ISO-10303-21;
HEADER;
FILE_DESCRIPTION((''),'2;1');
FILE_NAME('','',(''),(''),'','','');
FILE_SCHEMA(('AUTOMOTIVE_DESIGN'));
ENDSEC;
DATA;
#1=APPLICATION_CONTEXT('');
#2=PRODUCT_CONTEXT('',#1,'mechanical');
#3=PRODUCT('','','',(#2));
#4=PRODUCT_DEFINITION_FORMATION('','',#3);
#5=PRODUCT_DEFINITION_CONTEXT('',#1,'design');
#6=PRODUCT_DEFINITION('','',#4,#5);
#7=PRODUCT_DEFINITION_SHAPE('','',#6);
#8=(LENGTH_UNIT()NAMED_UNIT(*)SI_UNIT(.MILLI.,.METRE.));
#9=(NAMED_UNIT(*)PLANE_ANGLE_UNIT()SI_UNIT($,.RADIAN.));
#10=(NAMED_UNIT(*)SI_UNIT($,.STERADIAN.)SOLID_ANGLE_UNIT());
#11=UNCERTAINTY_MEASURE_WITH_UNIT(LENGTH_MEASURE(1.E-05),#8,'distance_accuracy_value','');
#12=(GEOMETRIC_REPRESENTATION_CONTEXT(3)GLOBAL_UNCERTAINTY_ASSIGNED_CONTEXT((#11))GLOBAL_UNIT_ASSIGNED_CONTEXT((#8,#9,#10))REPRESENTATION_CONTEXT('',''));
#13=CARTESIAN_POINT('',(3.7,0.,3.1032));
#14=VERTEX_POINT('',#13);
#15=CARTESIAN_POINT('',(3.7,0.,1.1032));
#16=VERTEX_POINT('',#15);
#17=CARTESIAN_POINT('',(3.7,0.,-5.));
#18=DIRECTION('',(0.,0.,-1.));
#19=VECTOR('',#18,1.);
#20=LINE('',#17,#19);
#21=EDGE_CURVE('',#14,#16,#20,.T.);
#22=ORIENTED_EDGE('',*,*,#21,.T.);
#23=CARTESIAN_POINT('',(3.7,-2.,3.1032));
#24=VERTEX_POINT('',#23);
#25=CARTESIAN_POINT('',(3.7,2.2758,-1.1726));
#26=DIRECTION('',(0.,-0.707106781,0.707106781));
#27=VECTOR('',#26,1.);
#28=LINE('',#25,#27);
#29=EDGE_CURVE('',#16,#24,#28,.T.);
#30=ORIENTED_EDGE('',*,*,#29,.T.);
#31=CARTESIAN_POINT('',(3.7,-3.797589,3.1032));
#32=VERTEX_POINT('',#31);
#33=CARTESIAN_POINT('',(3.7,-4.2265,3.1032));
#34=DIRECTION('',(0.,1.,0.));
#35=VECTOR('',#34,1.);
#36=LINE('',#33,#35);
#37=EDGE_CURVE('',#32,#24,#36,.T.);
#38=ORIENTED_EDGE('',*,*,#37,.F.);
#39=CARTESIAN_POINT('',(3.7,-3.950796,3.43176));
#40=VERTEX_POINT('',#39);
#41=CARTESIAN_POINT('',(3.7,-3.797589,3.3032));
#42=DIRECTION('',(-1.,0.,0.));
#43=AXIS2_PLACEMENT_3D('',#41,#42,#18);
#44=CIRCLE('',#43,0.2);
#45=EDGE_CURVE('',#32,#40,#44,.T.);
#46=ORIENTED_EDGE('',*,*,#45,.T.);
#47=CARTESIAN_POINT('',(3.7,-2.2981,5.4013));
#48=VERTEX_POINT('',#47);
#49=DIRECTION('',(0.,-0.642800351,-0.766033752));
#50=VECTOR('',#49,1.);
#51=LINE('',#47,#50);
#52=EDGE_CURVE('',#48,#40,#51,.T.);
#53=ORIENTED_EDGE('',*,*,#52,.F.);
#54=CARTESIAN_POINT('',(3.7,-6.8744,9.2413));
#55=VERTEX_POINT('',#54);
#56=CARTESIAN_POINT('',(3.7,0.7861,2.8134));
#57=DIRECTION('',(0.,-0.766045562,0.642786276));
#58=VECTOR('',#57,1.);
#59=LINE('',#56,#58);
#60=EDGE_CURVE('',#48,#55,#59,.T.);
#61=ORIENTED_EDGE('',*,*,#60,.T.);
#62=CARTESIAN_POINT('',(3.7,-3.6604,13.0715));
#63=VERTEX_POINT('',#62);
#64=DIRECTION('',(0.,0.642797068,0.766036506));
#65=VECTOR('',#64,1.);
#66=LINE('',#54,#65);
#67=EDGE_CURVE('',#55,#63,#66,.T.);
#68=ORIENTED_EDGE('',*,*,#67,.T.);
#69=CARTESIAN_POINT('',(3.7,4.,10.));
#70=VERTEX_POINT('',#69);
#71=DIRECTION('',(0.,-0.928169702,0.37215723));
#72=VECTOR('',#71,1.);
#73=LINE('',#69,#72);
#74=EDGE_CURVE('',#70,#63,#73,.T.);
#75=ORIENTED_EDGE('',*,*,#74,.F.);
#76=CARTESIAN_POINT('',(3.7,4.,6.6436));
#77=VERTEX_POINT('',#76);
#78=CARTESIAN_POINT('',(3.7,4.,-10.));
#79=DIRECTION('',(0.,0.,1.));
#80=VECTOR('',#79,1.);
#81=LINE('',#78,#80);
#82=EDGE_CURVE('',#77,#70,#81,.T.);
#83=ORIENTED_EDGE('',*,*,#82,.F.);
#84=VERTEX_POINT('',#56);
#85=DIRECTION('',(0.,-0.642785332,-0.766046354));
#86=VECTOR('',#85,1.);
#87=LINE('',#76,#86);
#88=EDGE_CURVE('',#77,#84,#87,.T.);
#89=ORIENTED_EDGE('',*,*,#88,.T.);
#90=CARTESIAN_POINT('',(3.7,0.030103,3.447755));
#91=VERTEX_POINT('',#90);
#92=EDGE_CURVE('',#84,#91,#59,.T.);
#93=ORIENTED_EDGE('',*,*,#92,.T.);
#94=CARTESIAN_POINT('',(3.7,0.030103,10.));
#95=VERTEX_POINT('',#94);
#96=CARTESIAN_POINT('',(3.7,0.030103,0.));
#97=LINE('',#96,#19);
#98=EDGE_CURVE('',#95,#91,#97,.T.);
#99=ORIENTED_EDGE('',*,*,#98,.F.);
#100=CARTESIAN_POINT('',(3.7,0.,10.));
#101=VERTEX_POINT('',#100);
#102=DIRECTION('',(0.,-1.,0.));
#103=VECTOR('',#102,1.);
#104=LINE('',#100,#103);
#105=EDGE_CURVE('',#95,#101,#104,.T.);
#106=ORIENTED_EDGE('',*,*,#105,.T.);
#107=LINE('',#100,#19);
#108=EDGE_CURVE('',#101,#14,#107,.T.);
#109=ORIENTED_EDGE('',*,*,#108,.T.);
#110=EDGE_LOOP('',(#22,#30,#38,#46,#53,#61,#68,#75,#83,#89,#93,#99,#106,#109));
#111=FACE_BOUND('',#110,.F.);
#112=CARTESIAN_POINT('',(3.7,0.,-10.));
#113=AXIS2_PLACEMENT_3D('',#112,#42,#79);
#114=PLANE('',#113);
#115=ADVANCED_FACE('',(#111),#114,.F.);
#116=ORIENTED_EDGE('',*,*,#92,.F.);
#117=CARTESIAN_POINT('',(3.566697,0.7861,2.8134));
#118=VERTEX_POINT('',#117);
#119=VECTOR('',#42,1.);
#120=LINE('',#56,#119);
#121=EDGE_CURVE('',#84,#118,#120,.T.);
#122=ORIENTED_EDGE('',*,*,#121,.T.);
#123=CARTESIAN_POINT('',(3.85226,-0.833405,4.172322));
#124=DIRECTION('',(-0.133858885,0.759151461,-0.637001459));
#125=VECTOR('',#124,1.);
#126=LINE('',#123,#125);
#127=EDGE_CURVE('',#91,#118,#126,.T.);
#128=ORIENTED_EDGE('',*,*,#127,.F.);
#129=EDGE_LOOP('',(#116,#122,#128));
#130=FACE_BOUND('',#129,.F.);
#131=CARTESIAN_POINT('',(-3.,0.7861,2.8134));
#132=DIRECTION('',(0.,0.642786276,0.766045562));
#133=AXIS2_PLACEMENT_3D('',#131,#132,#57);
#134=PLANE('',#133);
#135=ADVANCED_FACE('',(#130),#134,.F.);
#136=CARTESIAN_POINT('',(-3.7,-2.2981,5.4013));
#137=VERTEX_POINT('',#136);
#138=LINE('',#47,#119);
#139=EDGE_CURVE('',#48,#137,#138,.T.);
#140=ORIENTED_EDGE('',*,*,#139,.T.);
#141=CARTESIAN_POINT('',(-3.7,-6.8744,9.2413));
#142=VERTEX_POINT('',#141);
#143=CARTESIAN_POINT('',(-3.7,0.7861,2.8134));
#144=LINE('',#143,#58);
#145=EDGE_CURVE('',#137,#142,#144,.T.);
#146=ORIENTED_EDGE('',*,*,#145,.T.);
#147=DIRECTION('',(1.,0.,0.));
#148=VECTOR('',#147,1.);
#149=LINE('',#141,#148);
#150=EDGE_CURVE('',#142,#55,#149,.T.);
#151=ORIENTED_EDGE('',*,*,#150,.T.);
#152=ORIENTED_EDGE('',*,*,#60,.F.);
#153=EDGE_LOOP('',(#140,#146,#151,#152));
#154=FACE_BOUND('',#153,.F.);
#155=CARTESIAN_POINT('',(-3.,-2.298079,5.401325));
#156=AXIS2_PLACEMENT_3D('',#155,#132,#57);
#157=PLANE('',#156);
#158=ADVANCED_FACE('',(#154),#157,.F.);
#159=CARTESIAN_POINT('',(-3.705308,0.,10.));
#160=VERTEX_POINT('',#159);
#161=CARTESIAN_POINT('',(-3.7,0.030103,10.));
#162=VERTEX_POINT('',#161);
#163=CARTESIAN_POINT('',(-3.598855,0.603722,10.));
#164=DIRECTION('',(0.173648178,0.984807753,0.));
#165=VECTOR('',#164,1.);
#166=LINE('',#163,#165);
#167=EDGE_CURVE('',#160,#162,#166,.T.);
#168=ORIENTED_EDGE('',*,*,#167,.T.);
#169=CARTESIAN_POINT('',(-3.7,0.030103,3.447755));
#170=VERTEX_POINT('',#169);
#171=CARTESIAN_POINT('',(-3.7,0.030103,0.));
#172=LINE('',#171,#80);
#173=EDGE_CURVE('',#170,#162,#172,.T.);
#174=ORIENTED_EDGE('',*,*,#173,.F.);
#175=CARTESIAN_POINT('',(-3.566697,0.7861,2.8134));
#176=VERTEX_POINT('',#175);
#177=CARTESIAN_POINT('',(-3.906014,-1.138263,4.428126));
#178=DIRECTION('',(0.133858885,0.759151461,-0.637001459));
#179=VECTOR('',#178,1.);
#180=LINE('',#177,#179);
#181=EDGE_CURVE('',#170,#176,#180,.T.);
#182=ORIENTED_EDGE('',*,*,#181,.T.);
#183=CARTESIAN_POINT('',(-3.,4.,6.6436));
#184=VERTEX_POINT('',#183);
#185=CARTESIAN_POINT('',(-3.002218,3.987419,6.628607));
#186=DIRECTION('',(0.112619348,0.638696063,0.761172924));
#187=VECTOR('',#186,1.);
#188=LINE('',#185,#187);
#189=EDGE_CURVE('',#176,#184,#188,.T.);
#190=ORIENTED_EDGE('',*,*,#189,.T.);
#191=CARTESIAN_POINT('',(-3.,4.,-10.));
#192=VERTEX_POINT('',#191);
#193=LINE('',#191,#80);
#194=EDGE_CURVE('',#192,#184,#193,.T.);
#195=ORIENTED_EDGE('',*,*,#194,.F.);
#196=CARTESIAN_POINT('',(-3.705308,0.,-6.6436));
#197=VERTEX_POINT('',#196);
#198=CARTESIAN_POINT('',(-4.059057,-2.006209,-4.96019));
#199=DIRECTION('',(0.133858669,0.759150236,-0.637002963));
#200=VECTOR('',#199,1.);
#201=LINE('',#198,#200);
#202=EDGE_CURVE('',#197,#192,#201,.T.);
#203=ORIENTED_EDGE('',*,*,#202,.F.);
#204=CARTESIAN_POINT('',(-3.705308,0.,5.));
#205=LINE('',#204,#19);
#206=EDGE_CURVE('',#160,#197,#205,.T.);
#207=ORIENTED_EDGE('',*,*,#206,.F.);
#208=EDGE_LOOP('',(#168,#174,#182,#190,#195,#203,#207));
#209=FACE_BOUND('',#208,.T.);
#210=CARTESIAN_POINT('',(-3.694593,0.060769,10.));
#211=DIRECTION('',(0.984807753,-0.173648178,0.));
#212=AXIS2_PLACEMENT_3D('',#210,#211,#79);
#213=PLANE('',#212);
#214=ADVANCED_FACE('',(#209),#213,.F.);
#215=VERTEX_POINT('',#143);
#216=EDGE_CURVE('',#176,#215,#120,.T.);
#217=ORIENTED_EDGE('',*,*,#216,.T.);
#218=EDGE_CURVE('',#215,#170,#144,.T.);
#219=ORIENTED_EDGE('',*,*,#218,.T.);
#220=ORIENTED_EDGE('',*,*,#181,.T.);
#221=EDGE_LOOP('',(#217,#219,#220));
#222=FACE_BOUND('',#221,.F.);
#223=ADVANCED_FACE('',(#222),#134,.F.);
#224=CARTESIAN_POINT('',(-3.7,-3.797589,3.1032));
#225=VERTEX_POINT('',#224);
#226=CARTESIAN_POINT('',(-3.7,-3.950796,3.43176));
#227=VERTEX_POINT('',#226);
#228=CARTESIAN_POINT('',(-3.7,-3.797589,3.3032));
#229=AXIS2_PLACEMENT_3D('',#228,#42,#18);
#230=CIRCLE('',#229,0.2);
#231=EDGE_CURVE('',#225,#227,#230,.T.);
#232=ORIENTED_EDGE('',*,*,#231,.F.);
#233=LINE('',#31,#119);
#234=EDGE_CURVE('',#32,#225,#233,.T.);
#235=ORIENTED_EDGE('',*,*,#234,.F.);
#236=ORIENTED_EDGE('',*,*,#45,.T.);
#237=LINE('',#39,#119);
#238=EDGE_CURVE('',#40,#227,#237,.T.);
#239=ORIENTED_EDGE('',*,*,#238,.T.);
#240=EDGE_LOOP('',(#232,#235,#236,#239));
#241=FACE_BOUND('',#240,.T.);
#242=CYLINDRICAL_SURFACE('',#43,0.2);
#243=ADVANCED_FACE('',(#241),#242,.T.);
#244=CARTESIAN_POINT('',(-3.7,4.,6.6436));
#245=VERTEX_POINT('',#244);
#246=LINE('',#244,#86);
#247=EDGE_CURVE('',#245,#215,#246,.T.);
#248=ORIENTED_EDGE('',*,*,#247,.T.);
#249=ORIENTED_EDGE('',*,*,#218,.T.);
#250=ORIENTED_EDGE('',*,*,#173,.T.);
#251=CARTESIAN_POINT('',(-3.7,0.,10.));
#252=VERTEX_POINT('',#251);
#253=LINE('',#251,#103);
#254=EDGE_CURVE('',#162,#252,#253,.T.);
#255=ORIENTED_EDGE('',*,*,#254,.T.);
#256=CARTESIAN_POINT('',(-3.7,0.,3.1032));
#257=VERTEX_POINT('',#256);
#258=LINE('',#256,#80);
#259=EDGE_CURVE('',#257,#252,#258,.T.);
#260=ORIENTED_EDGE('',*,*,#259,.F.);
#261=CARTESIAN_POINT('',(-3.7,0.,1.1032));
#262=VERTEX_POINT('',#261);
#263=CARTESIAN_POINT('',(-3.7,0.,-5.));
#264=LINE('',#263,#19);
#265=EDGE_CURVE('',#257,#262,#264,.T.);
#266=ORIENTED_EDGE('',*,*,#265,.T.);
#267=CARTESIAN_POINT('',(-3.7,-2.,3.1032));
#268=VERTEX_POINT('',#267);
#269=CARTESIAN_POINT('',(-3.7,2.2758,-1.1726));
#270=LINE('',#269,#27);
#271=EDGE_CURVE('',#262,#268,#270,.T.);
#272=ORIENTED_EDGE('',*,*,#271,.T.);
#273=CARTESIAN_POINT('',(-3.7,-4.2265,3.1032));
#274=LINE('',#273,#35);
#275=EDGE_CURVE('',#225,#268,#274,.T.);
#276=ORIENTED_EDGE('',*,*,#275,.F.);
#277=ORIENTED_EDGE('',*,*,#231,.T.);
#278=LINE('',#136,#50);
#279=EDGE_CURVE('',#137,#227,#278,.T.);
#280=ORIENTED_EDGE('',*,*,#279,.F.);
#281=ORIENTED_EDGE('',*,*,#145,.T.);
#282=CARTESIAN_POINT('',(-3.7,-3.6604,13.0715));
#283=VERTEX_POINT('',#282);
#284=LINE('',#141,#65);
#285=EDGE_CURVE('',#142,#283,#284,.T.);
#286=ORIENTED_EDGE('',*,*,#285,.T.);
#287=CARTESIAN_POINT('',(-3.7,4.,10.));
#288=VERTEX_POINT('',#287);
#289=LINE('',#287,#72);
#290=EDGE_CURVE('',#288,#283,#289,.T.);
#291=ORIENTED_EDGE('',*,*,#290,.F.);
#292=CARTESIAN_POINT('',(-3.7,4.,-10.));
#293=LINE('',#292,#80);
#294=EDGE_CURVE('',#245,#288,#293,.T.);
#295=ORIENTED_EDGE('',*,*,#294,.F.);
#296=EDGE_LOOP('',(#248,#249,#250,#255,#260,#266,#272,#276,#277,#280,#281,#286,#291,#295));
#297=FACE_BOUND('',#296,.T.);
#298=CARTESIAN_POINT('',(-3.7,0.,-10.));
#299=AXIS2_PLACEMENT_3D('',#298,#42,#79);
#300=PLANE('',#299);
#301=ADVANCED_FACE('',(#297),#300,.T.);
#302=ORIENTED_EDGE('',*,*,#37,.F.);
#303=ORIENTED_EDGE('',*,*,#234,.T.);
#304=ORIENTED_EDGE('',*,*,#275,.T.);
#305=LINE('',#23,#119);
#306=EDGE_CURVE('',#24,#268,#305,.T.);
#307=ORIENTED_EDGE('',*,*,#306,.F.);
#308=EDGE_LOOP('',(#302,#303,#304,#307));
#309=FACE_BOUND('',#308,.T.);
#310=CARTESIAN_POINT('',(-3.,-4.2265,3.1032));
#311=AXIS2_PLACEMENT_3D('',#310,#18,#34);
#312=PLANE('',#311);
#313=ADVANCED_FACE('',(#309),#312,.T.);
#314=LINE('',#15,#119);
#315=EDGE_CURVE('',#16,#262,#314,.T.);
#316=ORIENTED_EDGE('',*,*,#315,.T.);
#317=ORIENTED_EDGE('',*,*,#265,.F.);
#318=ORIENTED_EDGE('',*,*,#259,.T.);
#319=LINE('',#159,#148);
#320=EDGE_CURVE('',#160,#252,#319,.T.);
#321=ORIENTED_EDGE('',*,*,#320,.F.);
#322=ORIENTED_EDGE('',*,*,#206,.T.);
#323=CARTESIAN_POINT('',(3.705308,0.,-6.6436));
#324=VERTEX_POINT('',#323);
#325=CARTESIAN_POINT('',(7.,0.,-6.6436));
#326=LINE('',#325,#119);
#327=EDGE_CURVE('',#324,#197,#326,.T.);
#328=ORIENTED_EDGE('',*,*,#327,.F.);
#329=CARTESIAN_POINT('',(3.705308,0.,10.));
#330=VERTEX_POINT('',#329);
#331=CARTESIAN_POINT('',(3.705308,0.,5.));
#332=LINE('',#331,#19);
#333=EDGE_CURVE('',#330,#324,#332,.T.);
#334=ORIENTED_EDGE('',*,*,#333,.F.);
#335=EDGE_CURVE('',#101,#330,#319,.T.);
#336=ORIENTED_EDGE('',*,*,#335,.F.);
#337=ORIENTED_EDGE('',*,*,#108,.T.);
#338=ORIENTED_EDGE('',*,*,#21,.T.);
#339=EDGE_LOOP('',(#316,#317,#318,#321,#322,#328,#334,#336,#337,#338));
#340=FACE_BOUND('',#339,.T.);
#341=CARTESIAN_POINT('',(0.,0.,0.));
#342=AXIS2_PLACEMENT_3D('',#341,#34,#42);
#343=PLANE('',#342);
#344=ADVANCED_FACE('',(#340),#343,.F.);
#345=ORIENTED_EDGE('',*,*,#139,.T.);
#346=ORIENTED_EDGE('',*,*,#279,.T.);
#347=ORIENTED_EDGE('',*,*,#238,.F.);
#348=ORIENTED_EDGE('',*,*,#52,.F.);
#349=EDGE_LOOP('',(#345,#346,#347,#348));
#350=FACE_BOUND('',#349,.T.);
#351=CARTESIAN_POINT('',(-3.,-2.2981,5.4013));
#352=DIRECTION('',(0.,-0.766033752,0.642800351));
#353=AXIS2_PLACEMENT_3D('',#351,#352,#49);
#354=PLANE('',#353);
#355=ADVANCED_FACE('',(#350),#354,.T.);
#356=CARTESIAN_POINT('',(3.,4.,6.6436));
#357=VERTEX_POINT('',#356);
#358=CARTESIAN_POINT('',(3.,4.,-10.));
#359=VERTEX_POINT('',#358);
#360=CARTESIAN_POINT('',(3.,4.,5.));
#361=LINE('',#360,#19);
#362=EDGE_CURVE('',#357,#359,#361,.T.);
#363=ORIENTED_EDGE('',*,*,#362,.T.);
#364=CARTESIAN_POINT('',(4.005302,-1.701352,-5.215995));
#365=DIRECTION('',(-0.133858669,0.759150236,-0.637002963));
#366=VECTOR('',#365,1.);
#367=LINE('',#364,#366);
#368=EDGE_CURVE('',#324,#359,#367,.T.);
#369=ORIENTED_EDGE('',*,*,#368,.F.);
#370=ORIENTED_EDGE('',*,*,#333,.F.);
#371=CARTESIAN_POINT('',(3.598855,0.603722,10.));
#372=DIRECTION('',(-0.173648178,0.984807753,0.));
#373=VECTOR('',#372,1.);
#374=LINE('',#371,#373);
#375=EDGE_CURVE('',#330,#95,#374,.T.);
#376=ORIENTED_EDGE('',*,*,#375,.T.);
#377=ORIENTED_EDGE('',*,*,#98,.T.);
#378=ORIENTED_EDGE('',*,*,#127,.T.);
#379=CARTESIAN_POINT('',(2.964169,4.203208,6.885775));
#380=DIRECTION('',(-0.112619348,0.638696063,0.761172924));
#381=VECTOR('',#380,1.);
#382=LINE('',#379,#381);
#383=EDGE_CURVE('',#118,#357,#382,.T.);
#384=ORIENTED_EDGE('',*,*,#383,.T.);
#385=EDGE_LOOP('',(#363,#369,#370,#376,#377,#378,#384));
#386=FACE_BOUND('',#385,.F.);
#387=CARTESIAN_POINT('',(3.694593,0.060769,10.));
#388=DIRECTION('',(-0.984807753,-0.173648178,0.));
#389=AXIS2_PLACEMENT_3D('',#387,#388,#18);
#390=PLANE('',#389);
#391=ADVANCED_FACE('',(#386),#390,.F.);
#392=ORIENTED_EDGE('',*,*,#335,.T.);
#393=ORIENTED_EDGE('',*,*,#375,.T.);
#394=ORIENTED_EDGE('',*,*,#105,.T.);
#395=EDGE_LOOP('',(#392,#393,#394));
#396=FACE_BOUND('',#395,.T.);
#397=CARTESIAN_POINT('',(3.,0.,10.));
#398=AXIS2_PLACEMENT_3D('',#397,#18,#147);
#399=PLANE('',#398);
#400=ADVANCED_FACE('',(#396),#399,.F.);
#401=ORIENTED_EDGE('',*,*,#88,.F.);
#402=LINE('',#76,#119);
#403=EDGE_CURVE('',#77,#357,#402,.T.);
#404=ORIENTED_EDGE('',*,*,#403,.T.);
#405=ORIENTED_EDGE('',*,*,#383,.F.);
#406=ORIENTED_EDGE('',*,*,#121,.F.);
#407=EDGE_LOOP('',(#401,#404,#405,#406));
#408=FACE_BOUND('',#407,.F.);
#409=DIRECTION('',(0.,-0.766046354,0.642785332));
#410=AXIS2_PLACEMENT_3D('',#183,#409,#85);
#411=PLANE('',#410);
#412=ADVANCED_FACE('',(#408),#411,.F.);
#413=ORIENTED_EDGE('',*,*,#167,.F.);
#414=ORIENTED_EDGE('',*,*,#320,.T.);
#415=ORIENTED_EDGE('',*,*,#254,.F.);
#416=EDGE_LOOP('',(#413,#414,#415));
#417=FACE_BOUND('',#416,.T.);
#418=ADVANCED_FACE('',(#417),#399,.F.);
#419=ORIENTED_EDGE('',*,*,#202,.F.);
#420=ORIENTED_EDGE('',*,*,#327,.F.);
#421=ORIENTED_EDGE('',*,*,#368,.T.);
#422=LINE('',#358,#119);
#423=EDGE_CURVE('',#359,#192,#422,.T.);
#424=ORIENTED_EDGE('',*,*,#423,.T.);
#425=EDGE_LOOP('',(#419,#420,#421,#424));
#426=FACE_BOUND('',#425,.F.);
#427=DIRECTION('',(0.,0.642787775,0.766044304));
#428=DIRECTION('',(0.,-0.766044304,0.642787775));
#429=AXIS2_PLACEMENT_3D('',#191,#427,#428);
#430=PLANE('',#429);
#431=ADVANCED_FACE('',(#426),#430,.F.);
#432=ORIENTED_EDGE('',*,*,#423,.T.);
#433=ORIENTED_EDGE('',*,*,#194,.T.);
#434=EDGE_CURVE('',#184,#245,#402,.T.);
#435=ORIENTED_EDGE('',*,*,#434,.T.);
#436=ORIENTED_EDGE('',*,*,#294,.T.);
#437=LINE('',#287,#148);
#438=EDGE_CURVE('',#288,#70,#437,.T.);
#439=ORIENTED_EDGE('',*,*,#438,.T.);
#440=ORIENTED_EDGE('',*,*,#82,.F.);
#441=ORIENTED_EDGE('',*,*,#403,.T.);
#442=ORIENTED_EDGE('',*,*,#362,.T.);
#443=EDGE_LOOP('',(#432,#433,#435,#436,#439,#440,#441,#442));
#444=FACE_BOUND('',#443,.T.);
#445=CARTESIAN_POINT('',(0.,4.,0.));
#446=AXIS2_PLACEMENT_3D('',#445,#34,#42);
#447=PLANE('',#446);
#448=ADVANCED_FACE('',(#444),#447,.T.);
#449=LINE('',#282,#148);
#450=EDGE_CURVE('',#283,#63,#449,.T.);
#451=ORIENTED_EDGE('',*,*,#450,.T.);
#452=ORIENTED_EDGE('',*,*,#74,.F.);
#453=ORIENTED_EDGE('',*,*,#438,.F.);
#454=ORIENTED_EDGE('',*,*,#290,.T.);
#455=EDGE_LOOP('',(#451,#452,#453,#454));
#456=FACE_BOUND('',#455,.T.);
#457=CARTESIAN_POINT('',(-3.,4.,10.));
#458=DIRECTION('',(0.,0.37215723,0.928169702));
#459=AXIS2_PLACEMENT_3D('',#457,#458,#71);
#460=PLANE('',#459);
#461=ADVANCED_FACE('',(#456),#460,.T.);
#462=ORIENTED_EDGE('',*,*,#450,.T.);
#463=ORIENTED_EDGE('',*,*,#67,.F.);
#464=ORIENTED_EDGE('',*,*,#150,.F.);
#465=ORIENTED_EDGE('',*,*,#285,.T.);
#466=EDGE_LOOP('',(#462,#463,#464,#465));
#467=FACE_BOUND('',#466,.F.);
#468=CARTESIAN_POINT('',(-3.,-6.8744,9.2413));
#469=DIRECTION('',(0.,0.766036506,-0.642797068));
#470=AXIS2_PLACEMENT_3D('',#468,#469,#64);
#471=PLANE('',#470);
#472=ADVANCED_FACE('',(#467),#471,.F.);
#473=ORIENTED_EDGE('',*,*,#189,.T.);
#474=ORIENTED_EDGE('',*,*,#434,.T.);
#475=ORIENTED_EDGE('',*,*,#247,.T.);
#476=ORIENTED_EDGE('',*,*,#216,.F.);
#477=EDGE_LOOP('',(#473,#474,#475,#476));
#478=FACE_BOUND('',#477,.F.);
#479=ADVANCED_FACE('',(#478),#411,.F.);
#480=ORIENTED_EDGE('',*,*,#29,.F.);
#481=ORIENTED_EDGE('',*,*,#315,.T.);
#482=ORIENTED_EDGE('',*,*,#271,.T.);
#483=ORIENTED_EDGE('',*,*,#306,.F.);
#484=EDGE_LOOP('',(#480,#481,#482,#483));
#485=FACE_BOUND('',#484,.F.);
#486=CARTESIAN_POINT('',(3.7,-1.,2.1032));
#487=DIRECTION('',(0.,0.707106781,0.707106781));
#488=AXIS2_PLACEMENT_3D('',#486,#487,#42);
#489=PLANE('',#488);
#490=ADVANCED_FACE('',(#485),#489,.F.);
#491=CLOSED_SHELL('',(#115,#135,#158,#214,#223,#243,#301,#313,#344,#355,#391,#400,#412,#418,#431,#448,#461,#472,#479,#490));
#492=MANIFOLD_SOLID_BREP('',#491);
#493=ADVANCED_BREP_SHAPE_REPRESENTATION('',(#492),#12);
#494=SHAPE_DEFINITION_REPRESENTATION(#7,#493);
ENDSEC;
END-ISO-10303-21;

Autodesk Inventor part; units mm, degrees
ref_plane "YZ Plane" through (0, 0, 0) normal (1, 0, 0) x (0, 1, 0)
ref_plane "XZ Plane" through (0, 0, 0) normal (0, 1, 0) x (-1, 0, 0)
ref_plane "XY Plane" through (0, 0, 0) normal (0, 0, 1) x (1, 0, 0)
sketch "Boceto1" plane through (0, 0, 0) normal (0, 1, 0) x (-1, 0, 0)
  line L0 (-3, -10) -> (3, -10)
  line L1 (3, -10) -> (3, 10)
  line L2 (3, 10) -> (-3, 10)
  line L3 (-3, 10) -> (-3, -10)
  line L4 (-3, -10) -> (3, 10) construction
  line L5 (3, -10) -> (-3, 10) construction
  point P0 (0, 0)
  dimension "d0" = 6
  dimension "d1" = 20
extrude "Extrusión1" add sketch "Boceto1" along normal blind 4
sketch "Boceto2" plane through (-3, 0, -10) normal (-1, 0, 0) x (0, 0, 1)
  line L0 (0, 0) -> (0, 4) projected
  line L1 (0, 4) -> (3.3564, 0)
  line L2 (0, 0) -> (20, 0) projected
  line L3 (0, 4) -> (5.2216, 4) construction
  line L4 (3.3564, 0) -> (0, 0)
  line L5 (0, 0) -> (0, 4)
  line L6 (20, 0) -> (16.6436, 4)
  line L7 (0, 4) -> (20, 4) projected
  line L8 (20, 0) -> (25.2216, 0) construction
  line L9 (16.6436, 4) -> (12.8134, 0.7861)
  line L10 (12.8134, 0.7861) -> (19.2413, -6.8744)
  line L11 (19.2413, -6.8744) -> (23.0715, -3.6604)
  line L12 (23.0715, -3.6604) -> (20, 0)
  line L13 (20, 4) -> (23.0715, -3.6604)
  line L14 (20, 4) -> (16.6436, 4)
  line L15 (13.473, 0) -> (15.4013, -2.2981)
  line L16 (15.4013, -2.2981) -> (13.1032, -4.2265)
  line L17 (13.1032, -4.2265) -> (13.1032, 0)
  point P0 (10, 0)
  point P1 (14.7285, 2.393)
  point P2 (14.8694, 0)
  point P3 (11.8766, 0)
  dimension "d9" = 50
  dimension "d10" = 130
  dimension "d11" = 90
  dimension "d12" = 10
  dimension "d15" = 5
  dimension "d16" = 3
  dimension "d17" = 3
draft "Cara para el ángulo de desmoldeo1" angle 10 pull direction (0, 1, 0) faces at (3, 2.6667, 3.3333) fixed edges at (3, 4, 0)
mirror "Simetría1" about plane through (0, 0, 0) normal (1, 0, 0) of "Extrusión1", "Cara para el ángulo de desmoldeo1"
extrude "Extrusión2" cut sketch "Boceto2" along normal mid plane 20 contours L0 L1 L2
extrude "Extrusión3" add sketch "Boceto2" along normal blind 0.7 and the other way blind 6.7 contours L7 L13 L12 L6 | L6 L2 L10 L9 | L2 L10 L16 L17 | L12 L11 L10 L2
chamfer "Chaflán1" distance 2 angle 45 1 edges at (0, 0, 3.1032)
fillet "Empalme1" radius 0.2 1 edges at (0, -4.2265, 3.1032)
properties part number "palitowantan"
